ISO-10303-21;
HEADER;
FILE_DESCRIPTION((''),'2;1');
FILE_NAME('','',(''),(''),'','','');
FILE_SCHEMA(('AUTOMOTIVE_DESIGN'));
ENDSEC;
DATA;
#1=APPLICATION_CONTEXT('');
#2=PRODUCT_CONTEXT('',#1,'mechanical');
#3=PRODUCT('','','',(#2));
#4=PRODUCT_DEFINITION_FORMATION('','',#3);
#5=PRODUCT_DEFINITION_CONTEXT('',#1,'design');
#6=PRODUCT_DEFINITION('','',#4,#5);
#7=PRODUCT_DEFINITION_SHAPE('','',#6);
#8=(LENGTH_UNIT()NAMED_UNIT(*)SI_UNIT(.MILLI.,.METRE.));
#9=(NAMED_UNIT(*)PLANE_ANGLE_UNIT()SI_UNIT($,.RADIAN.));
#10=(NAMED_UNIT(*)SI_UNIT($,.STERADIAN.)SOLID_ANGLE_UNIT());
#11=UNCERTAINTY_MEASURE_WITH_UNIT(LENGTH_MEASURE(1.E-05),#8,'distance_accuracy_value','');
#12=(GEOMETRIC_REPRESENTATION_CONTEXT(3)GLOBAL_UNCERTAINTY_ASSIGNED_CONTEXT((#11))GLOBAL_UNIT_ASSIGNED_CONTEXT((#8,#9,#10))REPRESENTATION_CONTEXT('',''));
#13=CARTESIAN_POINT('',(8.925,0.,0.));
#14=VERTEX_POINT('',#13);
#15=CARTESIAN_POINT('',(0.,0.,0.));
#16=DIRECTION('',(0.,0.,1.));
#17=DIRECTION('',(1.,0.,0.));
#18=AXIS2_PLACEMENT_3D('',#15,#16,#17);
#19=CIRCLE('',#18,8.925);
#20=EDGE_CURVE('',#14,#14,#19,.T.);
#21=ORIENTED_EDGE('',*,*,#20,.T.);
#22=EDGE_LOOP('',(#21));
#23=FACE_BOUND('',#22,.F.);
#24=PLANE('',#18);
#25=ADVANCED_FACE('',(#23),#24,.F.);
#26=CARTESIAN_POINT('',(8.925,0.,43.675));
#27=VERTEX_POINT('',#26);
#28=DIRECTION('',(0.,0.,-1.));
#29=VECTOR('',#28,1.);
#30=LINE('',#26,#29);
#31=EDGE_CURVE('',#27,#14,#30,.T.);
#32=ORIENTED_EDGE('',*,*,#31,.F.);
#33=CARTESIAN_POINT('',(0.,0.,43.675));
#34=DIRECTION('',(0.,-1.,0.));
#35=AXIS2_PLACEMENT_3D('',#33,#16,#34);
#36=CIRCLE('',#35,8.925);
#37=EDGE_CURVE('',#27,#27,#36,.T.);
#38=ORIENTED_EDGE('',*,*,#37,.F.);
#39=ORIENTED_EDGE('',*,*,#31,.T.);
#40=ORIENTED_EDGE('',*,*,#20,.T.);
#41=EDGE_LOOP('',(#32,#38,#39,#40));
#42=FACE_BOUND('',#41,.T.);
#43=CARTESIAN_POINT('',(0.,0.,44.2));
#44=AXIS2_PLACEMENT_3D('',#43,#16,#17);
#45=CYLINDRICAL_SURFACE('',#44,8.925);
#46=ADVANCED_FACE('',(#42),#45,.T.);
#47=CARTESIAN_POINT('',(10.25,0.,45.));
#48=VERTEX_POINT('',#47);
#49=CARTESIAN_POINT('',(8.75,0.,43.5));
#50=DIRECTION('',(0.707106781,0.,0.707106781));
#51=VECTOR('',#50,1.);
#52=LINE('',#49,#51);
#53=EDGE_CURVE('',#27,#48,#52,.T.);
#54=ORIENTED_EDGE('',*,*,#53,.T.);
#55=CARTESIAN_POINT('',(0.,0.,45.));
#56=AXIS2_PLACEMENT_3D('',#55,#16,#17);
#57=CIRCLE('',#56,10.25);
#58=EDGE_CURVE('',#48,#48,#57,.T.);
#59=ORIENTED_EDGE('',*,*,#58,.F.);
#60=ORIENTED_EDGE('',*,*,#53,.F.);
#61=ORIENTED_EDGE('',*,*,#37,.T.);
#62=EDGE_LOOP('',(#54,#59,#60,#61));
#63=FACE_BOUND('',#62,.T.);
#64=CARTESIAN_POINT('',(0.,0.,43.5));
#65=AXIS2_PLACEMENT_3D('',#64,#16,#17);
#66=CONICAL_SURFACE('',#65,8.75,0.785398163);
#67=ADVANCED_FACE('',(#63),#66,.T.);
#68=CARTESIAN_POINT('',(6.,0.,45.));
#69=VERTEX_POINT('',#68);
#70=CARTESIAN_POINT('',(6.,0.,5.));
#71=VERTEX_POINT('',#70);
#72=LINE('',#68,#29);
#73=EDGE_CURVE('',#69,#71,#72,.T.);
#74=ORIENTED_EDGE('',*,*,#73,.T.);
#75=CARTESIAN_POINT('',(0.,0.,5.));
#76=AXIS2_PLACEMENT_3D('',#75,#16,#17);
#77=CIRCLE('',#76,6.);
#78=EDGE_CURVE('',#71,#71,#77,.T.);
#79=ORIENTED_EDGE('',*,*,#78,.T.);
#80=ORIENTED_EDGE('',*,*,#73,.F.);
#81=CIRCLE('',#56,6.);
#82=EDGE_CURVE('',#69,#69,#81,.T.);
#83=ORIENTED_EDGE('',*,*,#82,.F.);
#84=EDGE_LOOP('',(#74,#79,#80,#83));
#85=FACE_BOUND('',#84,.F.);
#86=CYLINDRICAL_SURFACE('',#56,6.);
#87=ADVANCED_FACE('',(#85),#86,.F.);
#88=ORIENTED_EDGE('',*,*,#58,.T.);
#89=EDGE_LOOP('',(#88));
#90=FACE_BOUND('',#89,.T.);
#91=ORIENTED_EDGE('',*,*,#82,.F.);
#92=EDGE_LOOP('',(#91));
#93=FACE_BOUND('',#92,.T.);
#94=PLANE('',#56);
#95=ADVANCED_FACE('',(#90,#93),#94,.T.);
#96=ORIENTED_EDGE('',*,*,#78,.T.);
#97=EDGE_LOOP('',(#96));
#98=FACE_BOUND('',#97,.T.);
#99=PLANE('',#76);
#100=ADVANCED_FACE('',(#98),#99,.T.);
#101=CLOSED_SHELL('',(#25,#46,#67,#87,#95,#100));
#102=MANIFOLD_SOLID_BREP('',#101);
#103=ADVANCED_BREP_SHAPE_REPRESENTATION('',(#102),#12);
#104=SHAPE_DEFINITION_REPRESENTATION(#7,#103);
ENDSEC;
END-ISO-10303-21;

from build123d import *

# Parameters (mm, degrees)
F0_R        = 8.925
F1_DEPTH    = 45
F2_R        = 6
F3_DEPTH    = 40
F4_R        = 10.25
F4_R_2      = 8.925
F5_DEPTH    = 1.5
F6_S5_R     = 8.925
F6_T6_DEPTH = 16


# Not quite as in the source:
# - a fillet or chamfer that OpenCascade refuses, or shapes differently, is made with other operations: its cross-section is extruded or revolved along the edge and cut away or added


with BuildPart() as f1:
    # F0 (on Top) → F1 (new body)
    with BuildSketch(Plane.XY):
        Circle(F0_R)
    extrude(amount=F1_DEPTH)

    # F2 (on face) → F3 (cut)
    with BuildSketch(Plane.XY.offset(45)):
        Circle(F2_R)
    extrude(amount=-F3_DEPTH, mode=Mode.SUBTRACT)

    # F4 (on face) → F5 (join)
    with BuildSketch(Plane.XY.offset(45)):
        Circle(F4_R)
        Circle(F4_R_2, mode=Mode.SUBTRACT)
    extrude(amount=-F5_DEPTH)

    # F6: chamfer of 1.5 on 1 edges, made by hand


with BuildPart() as f6_tool2:
    # F6_s3 → F6_t4 (revolve)
    with BuildSketch(Plane.XZ):
        Polygon((8.75, 43.5), (10.25, 45), (10.25, 43.5), align=None)
    revolve(axis=Axis((0, 0, 43.5), (0, 0, 1)))

    # F6_s5 → F6_t6 (cut, symmetric)
    with BuildSketch(Plane.XY.offset(44.2)):
        Circle(F6_S5_R)
    extrude(amount=F6_T6_DEPTH, both=True, mode=Mode.SUBTRACT)


with BuildPart() as f1_1:
    add(f1.part)

    # F6_t1: cut F6_tool2
    add(f6_tool2.part, mode=Mode.SUBTRACT)


solid = f1_1.part
